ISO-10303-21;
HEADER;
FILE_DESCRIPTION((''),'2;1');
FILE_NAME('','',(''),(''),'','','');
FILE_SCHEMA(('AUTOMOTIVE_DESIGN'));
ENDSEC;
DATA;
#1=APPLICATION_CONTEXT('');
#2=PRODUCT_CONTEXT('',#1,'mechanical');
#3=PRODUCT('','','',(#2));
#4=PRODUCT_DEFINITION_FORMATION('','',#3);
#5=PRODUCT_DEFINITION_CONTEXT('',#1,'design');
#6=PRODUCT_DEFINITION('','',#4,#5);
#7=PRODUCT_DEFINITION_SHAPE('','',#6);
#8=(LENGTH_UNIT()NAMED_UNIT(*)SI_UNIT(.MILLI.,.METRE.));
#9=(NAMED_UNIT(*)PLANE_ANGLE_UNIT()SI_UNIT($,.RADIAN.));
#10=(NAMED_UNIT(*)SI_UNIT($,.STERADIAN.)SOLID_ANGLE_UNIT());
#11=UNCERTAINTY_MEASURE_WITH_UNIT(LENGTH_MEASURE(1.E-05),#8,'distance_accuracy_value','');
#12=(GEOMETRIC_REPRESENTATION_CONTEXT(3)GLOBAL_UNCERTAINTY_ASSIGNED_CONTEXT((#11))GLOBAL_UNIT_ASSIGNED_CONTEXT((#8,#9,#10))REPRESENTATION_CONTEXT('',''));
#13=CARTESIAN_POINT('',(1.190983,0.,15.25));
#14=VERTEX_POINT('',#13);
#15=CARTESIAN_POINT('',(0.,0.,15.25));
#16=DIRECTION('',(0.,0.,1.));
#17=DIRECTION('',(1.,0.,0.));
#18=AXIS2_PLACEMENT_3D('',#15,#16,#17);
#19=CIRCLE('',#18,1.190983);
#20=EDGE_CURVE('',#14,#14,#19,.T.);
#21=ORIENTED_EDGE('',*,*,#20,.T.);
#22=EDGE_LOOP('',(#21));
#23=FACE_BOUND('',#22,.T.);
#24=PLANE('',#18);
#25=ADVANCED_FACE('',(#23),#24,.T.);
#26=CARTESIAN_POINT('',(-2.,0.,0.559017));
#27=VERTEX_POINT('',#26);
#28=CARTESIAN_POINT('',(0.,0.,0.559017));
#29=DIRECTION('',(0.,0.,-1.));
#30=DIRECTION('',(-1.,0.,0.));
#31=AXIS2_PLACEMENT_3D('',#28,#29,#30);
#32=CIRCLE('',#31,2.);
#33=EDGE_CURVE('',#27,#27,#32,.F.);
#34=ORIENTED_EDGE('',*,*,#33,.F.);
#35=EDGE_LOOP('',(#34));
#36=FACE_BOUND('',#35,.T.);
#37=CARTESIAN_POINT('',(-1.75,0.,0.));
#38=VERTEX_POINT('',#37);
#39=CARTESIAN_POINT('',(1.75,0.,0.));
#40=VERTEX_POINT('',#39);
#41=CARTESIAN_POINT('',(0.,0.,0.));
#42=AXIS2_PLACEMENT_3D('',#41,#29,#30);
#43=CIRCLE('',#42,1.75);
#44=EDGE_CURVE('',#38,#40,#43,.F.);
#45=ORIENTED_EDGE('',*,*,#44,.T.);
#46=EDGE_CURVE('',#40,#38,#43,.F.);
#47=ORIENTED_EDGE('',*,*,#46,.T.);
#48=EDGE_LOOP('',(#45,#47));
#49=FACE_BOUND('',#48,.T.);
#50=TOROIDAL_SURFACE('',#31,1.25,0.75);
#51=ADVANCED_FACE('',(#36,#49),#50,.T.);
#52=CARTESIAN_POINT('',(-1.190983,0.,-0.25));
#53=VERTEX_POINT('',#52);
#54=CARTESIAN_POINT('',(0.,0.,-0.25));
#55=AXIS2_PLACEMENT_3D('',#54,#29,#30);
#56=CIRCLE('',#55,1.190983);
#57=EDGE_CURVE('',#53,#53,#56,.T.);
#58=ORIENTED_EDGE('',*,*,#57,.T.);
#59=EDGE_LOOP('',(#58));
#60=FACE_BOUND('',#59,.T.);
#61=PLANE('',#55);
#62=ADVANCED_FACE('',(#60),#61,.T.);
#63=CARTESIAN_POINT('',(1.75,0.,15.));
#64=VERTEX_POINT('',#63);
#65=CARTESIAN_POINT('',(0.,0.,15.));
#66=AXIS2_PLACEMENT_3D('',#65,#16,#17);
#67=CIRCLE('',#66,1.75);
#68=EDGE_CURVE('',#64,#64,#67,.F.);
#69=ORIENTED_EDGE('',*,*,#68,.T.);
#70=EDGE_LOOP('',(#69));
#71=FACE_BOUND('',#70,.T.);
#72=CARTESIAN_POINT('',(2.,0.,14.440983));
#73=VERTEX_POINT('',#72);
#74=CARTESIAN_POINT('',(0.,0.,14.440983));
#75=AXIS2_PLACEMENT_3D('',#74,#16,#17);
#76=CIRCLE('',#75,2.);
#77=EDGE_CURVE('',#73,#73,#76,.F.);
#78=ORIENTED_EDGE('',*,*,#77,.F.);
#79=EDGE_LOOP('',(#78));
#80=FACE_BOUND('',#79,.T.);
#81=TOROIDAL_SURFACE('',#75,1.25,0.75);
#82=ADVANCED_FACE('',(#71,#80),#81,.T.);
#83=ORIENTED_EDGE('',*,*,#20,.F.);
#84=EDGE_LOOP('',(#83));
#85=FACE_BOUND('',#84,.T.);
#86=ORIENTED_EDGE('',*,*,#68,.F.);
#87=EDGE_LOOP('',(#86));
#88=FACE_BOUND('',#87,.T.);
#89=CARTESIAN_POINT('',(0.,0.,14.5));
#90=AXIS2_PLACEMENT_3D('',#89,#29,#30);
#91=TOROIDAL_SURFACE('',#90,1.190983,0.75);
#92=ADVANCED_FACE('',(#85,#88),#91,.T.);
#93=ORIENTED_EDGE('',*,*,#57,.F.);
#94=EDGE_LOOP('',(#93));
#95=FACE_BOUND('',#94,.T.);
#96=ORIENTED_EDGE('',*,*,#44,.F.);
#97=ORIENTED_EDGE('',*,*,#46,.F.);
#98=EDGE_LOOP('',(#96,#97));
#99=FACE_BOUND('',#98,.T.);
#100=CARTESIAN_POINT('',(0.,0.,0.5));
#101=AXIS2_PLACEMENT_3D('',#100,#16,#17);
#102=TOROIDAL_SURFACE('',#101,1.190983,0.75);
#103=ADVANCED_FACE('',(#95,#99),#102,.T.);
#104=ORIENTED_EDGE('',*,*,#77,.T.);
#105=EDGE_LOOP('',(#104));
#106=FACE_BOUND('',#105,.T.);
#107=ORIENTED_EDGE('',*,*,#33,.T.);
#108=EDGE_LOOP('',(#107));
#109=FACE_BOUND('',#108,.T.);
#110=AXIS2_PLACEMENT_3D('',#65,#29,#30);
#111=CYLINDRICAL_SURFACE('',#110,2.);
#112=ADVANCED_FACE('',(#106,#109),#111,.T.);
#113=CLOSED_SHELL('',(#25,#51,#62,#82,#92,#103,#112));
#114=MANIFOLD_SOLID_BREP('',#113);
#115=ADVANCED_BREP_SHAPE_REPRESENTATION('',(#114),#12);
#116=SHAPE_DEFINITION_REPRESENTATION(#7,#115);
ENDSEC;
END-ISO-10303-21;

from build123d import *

# Parameters (mm, degrees)
SKETCH4_R           = 2
BOSS_EXTRUDE2_DEPTH = 15
SKETCH5_R           = 1.75
BOSS_EXTRUDE3_DEPTH = 0.25
FILLET3_R           = 0.75
SKETCH6_R           = 1.75
BOSS_EXTRUDE4_DEPTH = 0.25
FILLET4_R           = 0.75


with BuildPart() as part:
    # Sketch4 → Boss-Extrude2 (new body)
    with BuildSketch(Plane.XY):
        Circle(SKETCH4_R)
    extrude(amount=BOSS_EXTRUDE2_DEPTH)

    # Sketch5 → Boss-Extrude3 (add)
    with BuildSketch(Plane.XY.offset(15)):
        Circle(SKETCH5_R)
    extrude(amount=BOSS_EXTRUDE3_DEPTH)

    # Fillet3
    # the kernel refuses this fillet: 0.75 mm, written as the material it takes off along each edge
    with BuildSketch(Plane(origin=(0, 0, 15), x_dir=(1, 0, 0), z_dir=(0, -1, 0))) as fillet3_piece_1:
        with BuildLine():
            CenterArc((1.25, -0.559016994), FILLET3_R, 0, 48.189685104)
            Line((1.75, 0), (1.76, 0.01118034))
            ThreePointArc((1.76, 0.01118034), (1.875, 0.015), (2, 0.015))
            Line((2, 0.015), (2.015, 0))
            Line((2.015, 0), (2.015, -0.559016994))
            Line((2.015, -0.559016994), (2, -0.559016994))
        make_face()
    revolve(axis=Axis((0, 0, 15), (0, 0, 1)), mode=Mode.SUBTRACT)
    with BuildSketch(Plane(origin=(0, 0, 15.25), x_dir=(1, 0, 0), z_dir=(0, -1, 0))) as fillet3_piece_2:
        with BuildLine():
            CenterArc((1.190983006, -0.75), FILLET3_R, 41.810314896, 48.189685104)
            Line((1.190983006, 0), (1.190983006, 0.015))
            Line((1.190983006, 0.015), (1.75, 0.015))
            Line((1.75, 0.015), (1.765, 0))
            ThreePointArc((1.765, 0), (1.765, -0.125), (1.76118034, -0.24))
            Line((1.76118034, -0.24), (1.75, -0.25))
        make_face()
    revolve(axis=Axis((0, 0, 15.25), (0, 0, 1)), mode=Mode.SUBTRACT)

    # Sketch6 → Boss-Extrude4 (add)
    with BuildSketch(Plane(origin=(0, 0, 0), x_dir=(-1, 0, 0), z_dir=(0, 0, -1))):
        Circle(SKETCH6_R)
    extrude(amount=BOSS_EXTRUDE4_DEPTH)

    # Fillet4
    # the kernel refuses this fillet: 0.75 mm, written as the material it takes off along each edge
    with BuildSketch(Plane(origin=(0, 0, -0.25), x_dir=(-1, 0, 0), z_dir=(0, -1, 0))) as fillet4_piece_1:
        with BuildLine():
            CenterArc((1.190983006, -0.75), FILLET4_R, 41.810314896, 48.189685104)
            Line((1.190983006, 0), (1.190983006, 0.015))
            Line((1.190983006, 0.015), (1.75, 0.015))
            Line((1.75, 0.015), (1.765, 0))
            ThreePointArc((1.765, 0), (1.765, -0.125), (1.76118034, -0.24))
            Line((1.76118034, -0.24), (1.75, -0.25))
        make_face()
    revolve(axis=Axis((0, 0, -0.25), (0, 0, -1)), mode=Mode.SUBTRACT)
    with BuildSketch(Plane(origin=(0, 0, 0), x_dir=(1, 0, 0), z_dir=(0, -1, 0))) as fillet4_piece_2:
        with BuildLine():
            CenterArc((1.25, 0.559016994), FILLET4_R, 311.810314896, 48.189685104)
            Line((1.75, 0), (1.76, -0.01118034))
            ThreePointArc((1.76, -0.01118034), (1.875, -0.015), (2, -0.015))
            Line((2, -0.015), (2.015, 0))
            Line((2.015, 0), (2.015, 0.559016994))
            Line((2.015, 0.559016994), (2, 0.559016994))
        make_face()
    revolve(axis=Axis((0, 0, 0), (0, 0, 1)), mode=Mode.SUBTRACT)


solid = part.part
